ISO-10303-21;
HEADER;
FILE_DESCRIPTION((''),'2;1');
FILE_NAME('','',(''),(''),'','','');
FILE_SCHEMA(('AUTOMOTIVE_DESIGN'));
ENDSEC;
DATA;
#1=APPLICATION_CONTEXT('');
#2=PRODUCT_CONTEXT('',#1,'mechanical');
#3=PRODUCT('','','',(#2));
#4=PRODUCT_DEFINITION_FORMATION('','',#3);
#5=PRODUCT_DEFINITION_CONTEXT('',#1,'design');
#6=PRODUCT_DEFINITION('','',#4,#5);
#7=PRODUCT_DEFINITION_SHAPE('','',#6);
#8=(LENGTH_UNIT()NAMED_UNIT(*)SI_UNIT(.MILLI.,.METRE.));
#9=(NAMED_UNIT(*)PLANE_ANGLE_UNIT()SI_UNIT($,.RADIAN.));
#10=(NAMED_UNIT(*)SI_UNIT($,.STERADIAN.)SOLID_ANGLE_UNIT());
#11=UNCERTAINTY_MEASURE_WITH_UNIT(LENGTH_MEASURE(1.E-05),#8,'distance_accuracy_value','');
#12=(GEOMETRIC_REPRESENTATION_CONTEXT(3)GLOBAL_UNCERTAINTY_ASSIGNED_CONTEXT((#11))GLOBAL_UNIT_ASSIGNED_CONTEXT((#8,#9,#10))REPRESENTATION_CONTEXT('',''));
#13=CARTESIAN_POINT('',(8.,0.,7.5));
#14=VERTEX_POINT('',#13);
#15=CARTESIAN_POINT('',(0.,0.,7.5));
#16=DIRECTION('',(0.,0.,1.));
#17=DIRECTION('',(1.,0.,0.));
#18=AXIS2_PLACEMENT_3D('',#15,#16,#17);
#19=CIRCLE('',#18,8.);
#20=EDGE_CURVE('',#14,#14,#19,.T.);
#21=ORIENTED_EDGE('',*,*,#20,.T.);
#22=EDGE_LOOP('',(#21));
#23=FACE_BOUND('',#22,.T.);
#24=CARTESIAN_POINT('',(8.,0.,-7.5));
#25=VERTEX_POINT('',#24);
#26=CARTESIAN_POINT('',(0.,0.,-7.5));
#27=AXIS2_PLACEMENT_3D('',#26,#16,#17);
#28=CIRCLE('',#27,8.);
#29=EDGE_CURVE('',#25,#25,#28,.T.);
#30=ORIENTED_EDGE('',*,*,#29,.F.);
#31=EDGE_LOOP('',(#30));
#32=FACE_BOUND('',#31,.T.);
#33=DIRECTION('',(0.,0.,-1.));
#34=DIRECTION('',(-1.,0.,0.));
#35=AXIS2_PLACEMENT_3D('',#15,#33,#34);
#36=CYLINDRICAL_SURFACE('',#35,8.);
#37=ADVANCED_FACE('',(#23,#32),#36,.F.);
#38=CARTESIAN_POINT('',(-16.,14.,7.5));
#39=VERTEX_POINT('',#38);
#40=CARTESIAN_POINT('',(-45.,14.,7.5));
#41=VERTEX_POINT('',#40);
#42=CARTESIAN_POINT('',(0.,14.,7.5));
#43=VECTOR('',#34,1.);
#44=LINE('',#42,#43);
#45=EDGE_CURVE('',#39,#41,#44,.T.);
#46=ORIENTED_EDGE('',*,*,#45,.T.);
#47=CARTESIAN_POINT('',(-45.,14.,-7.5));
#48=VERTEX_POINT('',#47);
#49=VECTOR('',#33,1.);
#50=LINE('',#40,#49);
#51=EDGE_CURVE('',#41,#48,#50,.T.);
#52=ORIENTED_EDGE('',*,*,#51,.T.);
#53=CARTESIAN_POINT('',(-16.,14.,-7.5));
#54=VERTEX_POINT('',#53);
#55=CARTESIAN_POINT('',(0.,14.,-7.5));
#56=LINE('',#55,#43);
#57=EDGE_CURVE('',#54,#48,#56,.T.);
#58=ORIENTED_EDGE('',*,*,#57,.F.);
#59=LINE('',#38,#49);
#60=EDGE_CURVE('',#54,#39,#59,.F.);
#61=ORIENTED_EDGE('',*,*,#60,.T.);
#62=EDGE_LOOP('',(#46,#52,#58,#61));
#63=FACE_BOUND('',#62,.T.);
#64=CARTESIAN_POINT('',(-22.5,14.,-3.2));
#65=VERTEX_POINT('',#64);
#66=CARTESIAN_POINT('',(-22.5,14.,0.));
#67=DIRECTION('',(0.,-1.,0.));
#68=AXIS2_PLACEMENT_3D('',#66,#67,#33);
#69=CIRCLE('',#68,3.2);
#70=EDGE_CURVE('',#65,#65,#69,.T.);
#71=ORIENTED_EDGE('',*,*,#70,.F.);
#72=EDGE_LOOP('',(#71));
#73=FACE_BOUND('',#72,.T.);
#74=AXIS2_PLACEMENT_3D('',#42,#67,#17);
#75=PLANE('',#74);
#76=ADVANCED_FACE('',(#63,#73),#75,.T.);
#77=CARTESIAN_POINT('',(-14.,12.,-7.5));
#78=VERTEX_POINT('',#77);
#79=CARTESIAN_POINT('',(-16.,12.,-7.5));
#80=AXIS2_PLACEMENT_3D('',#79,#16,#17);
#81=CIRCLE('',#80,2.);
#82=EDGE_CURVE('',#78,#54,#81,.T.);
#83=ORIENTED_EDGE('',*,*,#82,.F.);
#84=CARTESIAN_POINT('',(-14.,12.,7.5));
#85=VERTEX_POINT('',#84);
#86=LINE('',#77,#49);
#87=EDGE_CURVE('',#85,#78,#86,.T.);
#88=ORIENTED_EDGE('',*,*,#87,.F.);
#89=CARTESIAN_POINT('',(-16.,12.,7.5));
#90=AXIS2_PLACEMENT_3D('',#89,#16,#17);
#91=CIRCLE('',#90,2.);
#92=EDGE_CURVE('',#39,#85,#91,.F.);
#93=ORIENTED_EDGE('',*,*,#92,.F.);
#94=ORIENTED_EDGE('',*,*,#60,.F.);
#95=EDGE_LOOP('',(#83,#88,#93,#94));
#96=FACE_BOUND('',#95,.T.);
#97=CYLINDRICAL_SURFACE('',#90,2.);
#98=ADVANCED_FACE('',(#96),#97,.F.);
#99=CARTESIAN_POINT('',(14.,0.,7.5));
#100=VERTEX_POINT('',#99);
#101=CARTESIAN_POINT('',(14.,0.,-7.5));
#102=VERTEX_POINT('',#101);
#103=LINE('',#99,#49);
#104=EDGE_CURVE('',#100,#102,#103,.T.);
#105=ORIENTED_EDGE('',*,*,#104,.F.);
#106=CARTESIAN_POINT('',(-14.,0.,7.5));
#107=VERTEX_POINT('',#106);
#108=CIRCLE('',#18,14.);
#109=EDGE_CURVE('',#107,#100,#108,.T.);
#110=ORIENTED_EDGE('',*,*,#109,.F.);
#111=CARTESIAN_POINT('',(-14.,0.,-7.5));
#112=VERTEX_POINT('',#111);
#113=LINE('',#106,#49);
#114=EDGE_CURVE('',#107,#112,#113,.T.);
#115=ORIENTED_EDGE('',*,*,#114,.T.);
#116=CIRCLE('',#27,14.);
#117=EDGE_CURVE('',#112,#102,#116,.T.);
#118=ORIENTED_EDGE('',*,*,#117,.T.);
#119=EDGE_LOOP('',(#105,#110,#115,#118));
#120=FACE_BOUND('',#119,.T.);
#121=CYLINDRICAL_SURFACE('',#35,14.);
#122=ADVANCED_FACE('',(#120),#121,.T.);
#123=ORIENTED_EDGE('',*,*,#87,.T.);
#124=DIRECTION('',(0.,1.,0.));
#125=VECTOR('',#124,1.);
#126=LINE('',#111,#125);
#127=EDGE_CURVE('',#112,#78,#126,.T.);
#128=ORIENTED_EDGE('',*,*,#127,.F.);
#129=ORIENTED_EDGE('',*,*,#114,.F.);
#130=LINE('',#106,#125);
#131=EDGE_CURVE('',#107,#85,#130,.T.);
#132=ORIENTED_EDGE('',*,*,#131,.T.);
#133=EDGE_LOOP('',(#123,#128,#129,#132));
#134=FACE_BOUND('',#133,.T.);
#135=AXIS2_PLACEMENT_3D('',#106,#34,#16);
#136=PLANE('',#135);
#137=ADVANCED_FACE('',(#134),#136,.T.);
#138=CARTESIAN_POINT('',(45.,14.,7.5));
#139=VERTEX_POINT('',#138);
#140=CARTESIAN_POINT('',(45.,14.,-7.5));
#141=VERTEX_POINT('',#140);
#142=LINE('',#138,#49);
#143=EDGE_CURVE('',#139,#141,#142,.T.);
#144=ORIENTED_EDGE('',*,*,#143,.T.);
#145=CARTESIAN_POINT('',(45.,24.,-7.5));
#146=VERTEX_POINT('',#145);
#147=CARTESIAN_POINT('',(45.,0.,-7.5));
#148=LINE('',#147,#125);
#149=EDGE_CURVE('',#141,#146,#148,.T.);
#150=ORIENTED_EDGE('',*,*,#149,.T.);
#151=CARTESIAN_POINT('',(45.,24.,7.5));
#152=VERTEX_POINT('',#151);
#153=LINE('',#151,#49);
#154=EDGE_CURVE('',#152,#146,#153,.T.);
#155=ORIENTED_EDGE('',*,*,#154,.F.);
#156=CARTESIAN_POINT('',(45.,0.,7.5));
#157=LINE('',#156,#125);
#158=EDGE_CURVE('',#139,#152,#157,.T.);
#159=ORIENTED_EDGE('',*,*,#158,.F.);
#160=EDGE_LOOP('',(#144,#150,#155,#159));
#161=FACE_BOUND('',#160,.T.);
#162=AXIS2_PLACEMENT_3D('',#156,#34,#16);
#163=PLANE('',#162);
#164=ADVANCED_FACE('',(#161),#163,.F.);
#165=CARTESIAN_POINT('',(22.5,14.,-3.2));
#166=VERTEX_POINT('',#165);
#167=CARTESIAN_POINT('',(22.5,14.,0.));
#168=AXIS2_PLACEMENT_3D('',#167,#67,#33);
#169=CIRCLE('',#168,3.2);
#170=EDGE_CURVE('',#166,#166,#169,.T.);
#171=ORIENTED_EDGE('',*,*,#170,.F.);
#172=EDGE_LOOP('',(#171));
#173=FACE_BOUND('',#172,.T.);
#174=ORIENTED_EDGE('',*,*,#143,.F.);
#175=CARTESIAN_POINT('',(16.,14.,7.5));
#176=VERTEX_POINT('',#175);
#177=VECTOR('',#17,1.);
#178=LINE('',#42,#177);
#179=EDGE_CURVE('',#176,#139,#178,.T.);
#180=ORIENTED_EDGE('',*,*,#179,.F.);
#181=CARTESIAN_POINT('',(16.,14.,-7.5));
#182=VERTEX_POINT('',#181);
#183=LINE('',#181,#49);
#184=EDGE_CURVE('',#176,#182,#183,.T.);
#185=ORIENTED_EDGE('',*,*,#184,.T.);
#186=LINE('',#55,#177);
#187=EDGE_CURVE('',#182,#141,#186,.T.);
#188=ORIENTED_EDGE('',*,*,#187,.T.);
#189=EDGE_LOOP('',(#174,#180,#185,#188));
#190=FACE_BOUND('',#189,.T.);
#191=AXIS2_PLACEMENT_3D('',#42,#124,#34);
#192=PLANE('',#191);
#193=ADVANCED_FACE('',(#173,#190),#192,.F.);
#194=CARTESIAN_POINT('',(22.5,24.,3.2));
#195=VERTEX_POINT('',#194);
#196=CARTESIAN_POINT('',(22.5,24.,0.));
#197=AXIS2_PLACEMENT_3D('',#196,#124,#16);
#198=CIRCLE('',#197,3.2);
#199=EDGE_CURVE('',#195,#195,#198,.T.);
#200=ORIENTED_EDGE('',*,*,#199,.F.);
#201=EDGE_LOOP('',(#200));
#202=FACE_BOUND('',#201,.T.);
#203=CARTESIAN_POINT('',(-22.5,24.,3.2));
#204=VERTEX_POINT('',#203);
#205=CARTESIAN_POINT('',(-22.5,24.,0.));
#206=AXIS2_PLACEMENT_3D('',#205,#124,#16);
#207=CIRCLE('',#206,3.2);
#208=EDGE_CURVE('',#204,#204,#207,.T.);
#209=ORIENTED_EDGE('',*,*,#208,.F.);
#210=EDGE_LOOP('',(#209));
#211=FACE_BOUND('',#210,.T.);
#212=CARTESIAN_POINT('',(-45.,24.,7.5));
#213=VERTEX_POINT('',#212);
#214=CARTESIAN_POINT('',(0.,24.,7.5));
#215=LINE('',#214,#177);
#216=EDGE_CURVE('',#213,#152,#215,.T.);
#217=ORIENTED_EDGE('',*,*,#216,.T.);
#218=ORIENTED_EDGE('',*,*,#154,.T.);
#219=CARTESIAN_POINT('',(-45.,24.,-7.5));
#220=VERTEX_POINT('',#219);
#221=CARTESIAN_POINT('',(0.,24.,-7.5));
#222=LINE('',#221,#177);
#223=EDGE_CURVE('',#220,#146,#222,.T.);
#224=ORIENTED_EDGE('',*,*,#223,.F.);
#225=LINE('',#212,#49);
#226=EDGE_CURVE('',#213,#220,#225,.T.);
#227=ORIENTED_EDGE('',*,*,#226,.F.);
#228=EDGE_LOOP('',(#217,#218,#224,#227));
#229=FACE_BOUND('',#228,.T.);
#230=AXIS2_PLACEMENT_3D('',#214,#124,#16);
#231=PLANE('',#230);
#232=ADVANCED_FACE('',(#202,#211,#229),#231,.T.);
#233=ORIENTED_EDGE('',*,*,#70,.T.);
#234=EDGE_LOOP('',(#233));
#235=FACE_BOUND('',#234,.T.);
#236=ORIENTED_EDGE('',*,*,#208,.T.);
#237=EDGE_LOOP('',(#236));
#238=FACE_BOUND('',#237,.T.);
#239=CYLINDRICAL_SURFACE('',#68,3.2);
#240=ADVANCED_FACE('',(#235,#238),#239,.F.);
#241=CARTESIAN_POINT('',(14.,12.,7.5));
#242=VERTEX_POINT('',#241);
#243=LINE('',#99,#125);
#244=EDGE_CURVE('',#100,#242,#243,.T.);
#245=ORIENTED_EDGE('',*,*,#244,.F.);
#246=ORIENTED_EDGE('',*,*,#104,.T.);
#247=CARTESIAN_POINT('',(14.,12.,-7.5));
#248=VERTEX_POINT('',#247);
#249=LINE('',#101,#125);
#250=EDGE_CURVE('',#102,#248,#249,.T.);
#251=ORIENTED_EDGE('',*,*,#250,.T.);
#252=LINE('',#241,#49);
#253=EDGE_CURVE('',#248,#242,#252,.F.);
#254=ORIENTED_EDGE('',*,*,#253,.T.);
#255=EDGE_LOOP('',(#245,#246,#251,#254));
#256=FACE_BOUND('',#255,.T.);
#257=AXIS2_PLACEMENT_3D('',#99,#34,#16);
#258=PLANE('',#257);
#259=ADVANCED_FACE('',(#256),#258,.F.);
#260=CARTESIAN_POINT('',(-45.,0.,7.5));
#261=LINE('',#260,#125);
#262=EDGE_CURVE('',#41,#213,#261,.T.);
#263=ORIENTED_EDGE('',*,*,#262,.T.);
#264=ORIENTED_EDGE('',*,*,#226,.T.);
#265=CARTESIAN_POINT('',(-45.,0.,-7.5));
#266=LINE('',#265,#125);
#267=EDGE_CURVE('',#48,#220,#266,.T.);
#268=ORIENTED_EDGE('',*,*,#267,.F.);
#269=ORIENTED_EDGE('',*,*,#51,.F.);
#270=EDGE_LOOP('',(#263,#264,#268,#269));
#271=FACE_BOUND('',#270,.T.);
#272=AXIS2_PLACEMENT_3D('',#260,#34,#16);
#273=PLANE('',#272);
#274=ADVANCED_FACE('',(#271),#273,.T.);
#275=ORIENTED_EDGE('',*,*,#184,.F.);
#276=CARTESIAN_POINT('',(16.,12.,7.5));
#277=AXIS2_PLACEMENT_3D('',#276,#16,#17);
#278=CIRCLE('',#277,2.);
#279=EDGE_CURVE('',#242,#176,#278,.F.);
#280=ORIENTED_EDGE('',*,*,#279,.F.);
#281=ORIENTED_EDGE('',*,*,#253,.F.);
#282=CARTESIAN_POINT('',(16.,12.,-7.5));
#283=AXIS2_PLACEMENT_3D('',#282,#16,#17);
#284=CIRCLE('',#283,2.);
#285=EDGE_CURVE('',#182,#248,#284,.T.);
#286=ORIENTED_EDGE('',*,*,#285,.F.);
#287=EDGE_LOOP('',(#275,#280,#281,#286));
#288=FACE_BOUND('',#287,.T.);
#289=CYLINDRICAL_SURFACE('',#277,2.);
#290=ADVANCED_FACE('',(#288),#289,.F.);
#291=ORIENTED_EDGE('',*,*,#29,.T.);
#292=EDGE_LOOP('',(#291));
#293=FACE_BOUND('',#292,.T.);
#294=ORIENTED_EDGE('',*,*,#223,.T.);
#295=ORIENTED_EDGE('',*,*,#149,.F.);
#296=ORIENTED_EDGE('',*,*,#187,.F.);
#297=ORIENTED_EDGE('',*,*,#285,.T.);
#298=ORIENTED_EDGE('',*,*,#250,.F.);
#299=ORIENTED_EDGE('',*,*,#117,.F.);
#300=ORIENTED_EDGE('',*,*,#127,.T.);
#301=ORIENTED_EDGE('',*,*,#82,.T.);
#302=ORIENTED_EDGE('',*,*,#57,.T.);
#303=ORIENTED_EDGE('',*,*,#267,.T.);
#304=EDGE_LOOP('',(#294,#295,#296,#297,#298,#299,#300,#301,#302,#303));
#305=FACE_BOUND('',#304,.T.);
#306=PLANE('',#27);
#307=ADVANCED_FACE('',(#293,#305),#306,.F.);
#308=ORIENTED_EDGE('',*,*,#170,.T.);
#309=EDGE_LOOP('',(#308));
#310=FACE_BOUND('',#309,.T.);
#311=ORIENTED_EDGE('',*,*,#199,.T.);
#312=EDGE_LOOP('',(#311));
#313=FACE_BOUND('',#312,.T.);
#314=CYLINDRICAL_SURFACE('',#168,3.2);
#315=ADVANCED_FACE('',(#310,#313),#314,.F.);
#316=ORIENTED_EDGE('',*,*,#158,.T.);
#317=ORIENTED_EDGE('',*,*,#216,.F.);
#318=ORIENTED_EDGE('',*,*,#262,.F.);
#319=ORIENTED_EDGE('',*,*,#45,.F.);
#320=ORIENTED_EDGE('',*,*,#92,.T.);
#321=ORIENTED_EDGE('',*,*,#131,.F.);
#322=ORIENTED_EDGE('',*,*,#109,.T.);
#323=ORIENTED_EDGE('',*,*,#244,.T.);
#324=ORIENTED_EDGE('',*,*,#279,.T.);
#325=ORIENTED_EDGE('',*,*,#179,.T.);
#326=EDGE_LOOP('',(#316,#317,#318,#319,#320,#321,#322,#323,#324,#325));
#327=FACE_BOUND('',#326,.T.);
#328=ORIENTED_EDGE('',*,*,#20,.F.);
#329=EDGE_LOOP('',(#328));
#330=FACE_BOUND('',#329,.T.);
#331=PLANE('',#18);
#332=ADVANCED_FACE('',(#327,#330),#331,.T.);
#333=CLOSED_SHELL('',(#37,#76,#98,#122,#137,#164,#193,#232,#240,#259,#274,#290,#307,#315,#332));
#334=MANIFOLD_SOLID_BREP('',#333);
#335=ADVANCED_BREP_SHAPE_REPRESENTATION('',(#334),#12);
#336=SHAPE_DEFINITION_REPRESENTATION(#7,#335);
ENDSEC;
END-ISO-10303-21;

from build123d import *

# Parameters (mm, degrees)
CROQUIS1_R                       = 8
SALIENTE_EXTRUIR1_DEPTH          = 7.5
TALADRO_DE_MARGEN_PARA_M61_D     = 6.4
TALADRO_DE_MARGEN_PARA_M61_DEPTH = 20
TALADRO_DE_MARGEN_PARA_M61_TIP   = 1.922753981
REDONDEO1_R                      = 2


with BuildPart() as part:
    # Croquis1 → Saliente-Extruir1 (new, symmetric)
    with BuildSketch(Plane.XY):
        with BuildLine():
            Line((-14, 14), (-14, 0))
            ThreePointArc((-14, 0), (0, -14), (14, 0))
            Line((14, 0), (14, 14))
            Line((14, 14), (45, 14))
            Line((45, 14), (45, 24))
            Line((45, 24), (-45, 24))
            Line((-45, 24), (-45, 14))
            Line((-45, 14), (-14, 14))
        make_face()
        Circle(CROQUIS1_R, mode=Mode.SUBTRACT)
    extrude(amount=SALIENTE_EXTRUIR1_DEPTH, both=True)

    # Taladro de margen para M61
    with Locations(Plane(origin=(0, 14, 0), x_dir=(-1, 0, 0), z_dir=(0, -1, 0))):
        with Locations((22.5, 0), (-22.5, 0)):
            Hole(TALADRO_DE_MARGEN_PARA_M61_D / 2, depth=TALADRO_DE_MARGEN_PARA_M61_DEPTH)
            with Locations((0, 0, -(TALADRO_DE_MARGEN_PARA_M61_DEPTH + TALADRO_DE_MARGEN_PARA_M61_TIP / 2))):  # 118° drill point
                Cone(0, TALADRO_DE_MARGEN_PARA_M61_D / 2, TALADRO_DE_MARGEN_PARA_M61_TIP, mode=Mode.SUBTRACT)

    # Redondeo1
    redondeo1_edges = [part.edges().sort_by_distance(p)[0] for p in [
        (-14, 14, 0),
        (14, 14, 0),
    ]]
    fillet(redondeo1_edges, radius=REDONDEO1_R)


solid = part.part
